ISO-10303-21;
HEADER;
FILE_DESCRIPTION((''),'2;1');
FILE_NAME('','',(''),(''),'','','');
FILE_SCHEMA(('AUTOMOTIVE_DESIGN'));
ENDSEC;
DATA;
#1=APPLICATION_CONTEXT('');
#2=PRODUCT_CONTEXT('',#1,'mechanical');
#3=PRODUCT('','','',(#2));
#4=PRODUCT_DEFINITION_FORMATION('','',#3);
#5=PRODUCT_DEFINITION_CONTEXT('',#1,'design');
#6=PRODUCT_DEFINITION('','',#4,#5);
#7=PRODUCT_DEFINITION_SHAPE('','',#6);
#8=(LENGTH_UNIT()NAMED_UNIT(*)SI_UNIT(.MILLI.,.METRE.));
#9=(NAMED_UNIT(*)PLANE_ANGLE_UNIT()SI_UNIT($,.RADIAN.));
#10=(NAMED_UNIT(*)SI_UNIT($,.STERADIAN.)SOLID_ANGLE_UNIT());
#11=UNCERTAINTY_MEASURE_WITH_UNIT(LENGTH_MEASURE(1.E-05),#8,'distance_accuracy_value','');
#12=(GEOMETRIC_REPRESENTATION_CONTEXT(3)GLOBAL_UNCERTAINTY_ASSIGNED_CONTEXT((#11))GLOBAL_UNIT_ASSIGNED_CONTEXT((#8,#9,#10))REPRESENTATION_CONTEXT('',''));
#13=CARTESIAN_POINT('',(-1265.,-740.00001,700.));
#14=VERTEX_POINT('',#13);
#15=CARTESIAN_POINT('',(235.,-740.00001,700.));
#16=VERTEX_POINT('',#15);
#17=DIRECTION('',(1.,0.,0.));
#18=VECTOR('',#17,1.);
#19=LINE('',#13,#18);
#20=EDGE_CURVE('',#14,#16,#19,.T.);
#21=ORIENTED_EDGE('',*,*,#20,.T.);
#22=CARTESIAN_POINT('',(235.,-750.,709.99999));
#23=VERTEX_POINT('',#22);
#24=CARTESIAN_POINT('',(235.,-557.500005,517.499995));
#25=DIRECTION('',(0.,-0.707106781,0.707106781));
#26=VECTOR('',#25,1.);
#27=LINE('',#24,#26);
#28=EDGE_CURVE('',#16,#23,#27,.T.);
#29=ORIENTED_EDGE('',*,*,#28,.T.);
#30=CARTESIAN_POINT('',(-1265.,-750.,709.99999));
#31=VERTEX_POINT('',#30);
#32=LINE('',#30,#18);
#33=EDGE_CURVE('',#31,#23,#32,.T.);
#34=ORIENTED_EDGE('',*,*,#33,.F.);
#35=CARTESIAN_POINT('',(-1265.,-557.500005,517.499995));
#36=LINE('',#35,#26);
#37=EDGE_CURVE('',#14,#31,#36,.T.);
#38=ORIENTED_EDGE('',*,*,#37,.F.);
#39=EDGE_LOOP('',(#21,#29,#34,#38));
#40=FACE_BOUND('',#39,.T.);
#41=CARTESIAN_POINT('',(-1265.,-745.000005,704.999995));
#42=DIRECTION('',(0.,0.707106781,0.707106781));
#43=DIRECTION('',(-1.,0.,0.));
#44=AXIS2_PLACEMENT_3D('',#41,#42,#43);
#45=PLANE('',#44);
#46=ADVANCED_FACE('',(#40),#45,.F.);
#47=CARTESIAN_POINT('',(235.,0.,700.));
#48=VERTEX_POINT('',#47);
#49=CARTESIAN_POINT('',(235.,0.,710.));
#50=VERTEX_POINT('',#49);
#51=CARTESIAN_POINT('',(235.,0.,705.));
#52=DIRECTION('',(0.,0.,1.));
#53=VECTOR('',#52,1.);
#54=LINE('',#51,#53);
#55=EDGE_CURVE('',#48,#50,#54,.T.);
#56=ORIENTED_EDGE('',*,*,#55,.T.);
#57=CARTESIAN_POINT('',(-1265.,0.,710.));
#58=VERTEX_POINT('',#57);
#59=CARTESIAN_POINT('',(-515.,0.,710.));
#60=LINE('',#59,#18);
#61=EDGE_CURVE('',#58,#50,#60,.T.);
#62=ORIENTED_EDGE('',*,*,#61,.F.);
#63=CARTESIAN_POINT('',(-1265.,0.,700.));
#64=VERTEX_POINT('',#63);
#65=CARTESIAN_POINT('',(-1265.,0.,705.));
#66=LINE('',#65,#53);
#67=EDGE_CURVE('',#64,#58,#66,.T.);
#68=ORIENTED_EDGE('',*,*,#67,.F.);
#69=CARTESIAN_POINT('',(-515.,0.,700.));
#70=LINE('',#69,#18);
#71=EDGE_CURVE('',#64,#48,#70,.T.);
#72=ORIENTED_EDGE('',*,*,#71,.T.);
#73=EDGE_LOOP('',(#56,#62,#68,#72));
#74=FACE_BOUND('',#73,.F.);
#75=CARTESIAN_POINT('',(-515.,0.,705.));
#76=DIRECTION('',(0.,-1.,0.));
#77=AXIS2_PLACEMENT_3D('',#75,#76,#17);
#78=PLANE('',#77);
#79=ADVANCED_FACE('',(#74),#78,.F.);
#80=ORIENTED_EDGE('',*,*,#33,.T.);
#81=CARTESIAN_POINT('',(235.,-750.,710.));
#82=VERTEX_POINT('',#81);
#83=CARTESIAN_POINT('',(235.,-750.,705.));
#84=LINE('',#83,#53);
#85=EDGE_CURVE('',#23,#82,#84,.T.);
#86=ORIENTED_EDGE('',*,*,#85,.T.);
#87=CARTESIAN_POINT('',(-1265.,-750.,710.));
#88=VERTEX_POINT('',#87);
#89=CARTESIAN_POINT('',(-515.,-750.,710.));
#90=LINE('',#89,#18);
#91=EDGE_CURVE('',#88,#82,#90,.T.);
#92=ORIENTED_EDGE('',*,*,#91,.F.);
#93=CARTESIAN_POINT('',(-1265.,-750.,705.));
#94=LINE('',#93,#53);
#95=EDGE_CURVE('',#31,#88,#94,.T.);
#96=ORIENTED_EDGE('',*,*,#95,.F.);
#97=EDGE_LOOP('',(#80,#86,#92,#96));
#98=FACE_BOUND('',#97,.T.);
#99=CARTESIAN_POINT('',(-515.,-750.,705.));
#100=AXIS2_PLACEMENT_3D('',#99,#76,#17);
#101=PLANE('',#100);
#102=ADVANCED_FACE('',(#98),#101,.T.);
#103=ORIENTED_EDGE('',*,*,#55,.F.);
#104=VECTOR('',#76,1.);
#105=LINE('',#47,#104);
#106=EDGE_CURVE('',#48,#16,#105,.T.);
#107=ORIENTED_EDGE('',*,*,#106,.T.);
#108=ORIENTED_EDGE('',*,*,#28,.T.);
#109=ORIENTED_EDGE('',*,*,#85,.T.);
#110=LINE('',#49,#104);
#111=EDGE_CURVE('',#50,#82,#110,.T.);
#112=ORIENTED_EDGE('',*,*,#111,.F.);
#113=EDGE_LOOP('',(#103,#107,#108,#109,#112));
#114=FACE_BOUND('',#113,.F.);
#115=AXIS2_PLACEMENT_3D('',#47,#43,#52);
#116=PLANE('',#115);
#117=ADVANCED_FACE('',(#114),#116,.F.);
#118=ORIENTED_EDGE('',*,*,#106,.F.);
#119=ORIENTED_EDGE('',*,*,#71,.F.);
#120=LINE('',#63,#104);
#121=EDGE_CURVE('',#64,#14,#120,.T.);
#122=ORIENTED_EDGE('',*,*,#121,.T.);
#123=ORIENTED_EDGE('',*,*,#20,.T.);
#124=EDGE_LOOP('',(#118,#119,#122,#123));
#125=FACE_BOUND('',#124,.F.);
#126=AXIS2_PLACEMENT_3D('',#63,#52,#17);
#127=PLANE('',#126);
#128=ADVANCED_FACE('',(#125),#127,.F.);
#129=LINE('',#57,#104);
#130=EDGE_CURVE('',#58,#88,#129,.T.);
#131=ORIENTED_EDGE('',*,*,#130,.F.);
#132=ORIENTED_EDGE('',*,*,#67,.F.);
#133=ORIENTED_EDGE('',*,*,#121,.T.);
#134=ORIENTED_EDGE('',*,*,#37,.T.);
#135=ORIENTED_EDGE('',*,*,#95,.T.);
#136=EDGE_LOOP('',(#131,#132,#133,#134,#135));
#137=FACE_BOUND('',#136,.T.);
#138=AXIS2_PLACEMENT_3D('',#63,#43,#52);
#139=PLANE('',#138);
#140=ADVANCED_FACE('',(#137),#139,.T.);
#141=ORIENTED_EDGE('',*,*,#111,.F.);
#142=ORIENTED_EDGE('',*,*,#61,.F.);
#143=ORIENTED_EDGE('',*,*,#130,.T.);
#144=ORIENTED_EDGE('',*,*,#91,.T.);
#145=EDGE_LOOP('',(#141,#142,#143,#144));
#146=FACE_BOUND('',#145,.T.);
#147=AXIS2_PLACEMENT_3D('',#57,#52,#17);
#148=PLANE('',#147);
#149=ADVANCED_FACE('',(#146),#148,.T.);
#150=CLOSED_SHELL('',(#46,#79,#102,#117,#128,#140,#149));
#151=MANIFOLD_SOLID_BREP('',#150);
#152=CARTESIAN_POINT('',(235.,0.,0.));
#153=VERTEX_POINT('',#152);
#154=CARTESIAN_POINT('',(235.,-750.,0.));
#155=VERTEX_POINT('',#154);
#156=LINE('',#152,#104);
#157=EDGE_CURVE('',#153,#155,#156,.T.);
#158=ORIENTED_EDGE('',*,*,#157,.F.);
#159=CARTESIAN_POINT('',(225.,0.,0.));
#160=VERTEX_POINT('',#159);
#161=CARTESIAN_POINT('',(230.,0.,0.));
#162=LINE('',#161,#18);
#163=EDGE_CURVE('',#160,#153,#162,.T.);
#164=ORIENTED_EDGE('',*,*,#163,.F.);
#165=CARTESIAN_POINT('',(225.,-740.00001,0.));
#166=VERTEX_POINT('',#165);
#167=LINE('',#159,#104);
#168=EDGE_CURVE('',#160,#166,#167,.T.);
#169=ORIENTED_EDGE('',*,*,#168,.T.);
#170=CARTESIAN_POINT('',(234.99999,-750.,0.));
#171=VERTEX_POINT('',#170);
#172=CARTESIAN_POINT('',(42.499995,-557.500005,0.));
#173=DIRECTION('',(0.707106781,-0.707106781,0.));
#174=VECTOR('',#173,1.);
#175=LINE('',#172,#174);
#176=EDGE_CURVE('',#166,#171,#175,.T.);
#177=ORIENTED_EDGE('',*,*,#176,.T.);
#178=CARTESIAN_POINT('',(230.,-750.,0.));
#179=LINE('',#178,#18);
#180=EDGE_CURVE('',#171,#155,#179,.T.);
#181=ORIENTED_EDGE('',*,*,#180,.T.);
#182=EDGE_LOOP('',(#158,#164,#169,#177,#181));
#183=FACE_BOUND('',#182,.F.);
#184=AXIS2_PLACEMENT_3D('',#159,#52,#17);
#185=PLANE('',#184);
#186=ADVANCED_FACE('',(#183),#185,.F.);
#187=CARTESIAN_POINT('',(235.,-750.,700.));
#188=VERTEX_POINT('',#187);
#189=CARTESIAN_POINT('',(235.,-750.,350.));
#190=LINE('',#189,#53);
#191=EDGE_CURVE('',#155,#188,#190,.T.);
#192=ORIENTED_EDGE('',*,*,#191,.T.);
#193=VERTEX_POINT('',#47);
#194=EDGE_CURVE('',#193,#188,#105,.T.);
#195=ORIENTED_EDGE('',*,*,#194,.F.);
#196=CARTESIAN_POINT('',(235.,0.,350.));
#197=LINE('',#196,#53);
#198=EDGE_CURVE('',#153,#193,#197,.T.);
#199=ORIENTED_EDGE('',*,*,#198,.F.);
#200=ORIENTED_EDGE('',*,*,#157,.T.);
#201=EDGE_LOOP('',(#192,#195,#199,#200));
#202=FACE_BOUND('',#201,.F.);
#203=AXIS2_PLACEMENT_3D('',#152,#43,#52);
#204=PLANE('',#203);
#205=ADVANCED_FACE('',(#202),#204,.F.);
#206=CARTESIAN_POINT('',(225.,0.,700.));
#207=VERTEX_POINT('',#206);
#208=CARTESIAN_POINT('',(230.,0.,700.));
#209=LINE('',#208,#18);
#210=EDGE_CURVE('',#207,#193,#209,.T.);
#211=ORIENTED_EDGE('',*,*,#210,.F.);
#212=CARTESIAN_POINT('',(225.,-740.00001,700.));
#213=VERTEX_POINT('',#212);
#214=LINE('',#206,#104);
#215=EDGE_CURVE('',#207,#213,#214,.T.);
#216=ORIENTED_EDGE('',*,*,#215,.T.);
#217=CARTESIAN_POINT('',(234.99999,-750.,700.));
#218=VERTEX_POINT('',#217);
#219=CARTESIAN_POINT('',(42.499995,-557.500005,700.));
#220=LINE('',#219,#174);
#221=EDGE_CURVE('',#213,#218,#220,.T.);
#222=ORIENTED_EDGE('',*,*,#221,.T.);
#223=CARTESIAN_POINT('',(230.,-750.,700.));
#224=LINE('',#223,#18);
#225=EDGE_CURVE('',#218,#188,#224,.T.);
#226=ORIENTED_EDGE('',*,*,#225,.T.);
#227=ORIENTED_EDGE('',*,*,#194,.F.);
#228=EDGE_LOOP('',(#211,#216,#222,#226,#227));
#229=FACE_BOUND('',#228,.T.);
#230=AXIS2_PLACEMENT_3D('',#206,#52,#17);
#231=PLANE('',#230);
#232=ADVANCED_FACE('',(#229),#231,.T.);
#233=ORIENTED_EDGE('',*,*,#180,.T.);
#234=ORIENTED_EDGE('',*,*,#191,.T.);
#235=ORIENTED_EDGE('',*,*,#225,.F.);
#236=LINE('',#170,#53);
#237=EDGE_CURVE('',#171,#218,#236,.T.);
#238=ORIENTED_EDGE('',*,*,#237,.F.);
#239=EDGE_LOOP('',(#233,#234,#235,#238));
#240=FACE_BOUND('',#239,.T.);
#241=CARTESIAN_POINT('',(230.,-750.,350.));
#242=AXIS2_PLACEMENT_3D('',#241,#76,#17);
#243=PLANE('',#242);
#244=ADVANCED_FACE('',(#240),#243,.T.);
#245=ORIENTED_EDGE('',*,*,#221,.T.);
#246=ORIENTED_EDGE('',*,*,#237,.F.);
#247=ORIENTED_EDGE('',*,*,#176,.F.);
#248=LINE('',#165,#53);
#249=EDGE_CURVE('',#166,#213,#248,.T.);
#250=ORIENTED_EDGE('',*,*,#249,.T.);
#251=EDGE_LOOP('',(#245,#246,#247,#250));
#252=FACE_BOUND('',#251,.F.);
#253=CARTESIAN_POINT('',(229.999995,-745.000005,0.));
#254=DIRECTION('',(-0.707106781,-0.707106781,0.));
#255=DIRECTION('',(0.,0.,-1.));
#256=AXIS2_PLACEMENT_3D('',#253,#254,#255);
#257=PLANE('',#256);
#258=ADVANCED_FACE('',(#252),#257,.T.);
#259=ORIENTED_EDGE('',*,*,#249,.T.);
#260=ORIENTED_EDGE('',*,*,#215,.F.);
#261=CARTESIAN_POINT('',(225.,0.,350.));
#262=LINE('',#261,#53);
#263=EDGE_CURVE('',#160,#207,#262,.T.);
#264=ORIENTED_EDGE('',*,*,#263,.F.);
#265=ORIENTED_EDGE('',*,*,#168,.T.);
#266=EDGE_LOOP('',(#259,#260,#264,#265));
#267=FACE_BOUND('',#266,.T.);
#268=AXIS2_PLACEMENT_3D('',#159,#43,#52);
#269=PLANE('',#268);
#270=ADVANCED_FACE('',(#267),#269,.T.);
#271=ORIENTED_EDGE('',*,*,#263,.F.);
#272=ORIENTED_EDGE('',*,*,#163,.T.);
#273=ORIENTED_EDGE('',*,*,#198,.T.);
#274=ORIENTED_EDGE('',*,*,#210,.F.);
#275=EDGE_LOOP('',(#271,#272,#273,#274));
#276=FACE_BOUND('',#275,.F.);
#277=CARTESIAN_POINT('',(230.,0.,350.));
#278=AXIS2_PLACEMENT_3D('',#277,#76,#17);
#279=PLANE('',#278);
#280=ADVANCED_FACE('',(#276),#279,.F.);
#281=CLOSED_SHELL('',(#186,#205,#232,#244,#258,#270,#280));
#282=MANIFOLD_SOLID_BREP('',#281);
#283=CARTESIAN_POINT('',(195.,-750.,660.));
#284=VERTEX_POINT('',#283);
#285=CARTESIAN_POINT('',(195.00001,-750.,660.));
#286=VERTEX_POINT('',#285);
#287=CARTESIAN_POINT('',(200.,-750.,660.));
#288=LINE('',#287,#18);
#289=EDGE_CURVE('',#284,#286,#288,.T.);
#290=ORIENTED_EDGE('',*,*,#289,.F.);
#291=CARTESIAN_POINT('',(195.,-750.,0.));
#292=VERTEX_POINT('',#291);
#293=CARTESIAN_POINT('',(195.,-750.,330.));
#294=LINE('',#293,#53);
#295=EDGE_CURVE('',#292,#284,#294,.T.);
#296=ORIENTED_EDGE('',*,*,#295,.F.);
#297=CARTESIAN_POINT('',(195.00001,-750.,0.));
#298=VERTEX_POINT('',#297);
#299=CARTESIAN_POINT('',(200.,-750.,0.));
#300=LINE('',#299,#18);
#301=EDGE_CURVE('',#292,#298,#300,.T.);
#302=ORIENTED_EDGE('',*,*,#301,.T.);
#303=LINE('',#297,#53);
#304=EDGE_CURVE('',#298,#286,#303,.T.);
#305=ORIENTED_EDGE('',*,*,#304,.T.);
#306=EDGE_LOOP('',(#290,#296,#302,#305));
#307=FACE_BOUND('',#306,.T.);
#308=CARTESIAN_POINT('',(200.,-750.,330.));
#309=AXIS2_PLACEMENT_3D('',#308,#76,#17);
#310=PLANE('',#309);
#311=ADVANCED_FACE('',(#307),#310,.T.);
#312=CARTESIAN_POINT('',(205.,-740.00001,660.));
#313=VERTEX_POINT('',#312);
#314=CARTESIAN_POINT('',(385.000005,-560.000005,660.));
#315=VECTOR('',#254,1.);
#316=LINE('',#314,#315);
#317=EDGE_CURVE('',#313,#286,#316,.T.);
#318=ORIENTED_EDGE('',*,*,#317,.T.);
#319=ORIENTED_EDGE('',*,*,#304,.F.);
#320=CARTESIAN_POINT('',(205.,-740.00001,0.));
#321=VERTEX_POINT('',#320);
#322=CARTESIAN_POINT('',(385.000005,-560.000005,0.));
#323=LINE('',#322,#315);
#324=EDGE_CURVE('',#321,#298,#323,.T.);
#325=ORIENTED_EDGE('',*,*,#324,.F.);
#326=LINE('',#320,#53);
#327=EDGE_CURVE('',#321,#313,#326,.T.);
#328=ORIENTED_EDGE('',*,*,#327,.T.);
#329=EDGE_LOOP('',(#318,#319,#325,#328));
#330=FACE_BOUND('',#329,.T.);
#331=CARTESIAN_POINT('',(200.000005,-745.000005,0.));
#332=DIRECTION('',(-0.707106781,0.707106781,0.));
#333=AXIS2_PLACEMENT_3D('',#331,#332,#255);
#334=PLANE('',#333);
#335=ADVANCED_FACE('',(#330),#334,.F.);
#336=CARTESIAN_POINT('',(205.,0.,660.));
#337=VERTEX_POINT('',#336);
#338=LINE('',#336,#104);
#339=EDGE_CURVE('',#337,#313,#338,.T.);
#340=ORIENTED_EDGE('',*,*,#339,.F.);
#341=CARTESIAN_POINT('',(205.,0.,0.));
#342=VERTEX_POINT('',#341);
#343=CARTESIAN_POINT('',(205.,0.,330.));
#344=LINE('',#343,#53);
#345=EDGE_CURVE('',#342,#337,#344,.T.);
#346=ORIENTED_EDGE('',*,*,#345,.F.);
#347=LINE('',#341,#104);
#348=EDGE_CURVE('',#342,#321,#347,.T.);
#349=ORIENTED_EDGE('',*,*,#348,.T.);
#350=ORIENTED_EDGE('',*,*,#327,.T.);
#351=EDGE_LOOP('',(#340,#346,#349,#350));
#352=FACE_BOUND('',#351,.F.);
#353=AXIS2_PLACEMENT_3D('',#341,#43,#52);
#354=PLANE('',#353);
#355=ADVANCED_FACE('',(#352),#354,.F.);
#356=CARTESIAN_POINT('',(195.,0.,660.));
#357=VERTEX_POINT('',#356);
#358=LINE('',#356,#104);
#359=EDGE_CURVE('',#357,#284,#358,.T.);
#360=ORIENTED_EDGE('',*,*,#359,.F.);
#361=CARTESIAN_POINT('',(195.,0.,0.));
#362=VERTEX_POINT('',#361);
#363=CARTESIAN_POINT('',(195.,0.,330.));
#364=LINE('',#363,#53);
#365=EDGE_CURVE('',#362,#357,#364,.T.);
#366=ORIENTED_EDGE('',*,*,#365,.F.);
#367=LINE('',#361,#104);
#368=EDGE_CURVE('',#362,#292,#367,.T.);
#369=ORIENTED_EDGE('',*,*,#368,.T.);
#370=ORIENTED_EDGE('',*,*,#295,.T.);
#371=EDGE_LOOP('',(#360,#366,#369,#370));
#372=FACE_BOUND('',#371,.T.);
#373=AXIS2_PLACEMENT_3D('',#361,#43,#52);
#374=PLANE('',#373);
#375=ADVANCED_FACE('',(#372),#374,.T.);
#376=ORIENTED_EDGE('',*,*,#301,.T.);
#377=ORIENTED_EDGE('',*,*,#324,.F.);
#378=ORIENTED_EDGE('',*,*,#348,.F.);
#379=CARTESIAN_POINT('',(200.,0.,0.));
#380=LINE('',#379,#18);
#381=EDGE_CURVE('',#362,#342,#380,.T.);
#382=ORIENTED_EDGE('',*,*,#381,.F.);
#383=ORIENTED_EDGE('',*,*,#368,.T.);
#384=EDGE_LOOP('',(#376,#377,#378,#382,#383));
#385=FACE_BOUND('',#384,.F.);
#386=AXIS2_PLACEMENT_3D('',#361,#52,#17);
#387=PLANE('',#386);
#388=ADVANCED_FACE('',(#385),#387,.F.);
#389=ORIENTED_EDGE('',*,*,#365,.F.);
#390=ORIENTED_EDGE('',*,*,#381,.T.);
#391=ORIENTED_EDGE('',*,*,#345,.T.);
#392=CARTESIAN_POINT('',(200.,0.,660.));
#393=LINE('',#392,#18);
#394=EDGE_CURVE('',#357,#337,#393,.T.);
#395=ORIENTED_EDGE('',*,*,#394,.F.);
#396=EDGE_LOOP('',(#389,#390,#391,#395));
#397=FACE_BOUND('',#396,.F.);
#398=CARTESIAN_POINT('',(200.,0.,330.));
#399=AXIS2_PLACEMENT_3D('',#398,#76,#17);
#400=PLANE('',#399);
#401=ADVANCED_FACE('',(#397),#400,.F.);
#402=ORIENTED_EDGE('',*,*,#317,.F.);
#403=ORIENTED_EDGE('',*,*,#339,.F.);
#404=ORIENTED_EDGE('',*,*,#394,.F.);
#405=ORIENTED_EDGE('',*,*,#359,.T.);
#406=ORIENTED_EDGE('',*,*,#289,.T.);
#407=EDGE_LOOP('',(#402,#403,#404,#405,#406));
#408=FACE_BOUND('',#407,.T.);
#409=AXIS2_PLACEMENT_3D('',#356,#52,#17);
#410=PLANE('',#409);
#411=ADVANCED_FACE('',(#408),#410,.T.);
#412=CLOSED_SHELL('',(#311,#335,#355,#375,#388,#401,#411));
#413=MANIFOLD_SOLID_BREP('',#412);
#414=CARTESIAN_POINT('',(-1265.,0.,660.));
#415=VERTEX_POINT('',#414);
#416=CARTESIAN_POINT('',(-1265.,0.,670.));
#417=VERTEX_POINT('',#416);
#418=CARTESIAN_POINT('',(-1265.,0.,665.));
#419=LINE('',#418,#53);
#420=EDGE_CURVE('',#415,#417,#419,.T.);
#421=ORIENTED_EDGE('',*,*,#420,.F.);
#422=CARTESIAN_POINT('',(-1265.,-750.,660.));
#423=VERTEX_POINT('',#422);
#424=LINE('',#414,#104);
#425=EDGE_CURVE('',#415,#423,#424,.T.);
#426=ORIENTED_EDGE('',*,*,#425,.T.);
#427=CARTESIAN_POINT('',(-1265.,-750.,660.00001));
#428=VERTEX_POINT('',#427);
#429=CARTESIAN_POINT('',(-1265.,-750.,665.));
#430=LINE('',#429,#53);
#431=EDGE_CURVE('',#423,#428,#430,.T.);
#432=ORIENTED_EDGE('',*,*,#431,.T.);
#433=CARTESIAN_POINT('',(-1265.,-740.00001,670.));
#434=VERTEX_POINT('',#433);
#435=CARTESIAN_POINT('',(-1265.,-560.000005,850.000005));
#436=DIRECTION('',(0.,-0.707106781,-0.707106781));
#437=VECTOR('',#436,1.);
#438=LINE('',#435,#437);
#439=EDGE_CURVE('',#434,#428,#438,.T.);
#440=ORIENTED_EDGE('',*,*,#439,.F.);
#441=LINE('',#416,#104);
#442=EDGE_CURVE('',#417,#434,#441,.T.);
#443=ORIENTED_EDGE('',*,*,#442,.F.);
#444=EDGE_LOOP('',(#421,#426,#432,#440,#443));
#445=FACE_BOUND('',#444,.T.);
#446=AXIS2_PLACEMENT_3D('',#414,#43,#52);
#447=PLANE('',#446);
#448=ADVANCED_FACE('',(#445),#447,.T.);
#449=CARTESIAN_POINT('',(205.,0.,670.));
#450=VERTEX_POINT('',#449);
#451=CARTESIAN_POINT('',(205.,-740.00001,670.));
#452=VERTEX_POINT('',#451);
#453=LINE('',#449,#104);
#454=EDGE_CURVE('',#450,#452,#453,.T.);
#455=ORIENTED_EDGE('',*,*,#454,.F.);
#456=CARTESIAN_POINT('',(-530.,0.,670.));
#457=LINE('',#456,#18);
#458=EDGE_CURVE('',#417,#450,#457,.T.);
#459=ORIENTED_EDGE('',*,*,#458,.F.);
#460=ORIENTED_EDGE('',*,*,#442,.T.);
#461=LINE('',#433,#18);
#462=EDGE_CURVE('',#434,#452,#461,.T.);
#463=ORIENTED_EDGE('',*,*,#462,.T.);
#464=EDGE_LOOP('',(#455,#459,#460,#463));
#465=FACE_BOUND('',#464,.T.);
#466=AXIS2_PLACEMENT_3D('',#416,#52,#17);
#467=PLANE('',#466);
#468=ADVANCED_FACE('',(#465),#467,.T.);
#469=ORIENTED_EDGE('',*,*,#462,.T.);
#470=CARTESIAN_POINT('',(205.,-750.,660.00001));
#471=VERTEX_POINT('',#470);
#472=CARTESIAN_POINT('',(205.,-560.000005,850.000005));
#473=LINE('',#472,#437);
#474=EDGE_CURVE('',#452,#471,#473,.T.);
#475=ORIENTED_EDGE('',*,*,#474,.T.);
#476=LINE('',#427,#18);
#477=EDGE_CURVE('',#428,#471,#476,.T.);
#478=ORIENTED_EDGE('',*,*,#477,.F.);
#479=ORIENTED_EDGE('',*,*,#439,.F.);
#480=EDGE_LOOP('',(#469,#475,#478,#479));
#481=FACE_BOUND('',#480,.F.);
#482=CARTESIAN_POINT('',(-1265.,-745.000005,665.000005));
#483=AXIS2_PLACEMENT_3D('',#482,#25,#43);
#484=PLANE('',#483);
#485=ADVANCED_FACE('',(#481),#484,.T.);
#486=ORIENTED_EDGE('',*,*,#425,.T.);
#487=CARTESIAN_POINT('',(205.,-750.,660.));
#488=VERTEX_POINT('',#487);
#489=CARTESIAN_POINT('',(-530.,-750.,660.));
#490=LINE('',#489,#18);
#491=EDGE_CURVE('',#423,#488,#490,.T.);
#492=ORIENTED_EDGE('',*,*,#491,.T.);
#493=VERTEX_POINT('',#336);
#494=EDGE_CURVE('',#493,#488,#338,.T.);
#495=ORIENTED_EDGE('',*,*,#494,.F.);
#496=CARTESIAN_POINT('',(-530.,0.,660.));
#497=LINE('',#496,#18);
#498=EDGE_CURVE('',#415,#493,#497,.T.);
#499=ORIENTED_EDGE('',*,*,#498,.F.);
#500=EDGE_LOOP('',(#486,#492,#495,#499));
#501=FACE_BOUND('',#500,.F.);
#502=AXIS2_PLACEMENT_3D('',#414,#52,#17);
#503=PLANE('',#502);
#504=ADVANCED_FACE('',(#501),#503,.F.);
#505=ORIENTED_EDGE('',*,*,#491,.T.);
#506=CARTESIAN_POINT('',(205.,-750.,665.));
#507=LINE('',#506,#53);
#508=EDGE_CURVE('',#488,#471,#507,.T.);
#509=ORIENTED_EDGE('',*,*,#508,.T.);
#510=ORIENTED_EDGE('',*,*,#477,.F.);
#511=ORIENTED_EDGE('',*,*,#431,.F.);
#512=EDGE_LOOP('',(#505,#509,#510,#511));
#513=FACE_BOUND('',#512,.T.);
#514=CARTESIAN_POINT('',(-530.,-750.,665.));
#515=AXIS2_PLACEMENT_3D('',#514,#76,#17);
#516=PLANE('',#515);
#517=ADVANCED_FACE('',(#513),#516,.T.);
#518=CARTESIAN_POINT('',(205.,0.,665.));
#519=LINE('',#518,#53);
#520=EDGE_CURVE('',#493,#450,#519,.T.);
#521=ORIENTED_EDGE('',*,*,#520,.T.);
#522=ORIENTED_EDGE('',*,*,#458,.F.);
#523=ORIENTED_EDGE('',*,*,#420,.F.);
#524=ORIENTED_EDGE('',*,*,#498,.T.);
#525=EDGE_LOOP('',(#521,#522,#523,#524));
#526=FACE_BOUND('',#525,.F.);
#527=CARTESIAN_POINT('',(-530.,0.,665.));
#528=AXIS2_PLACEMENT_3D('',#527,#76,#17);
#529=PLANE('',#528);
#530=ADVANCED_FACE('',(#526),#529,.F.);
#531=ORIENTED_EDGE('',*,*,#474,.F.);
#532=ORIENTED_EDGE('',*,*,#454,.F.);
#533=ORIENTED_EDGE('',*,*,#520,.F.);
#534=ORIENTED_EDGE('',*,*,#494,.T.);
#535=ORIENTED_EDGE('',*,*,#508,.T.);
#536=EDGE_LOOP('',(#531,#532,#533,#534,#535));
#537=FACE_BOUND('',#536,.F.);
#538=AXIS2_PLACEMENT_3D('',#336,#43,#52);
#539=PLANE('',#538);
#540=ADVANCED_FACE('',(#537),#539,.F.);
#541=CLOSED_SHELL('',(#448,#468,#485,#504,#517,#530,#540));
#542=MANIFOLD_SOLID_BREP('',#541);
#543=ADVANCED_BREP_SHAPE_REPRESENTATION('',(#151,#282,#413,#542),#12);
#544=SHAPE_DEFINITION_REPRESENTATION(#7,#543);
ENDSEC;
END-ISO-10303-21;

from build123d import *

# Parameters (mm, degrees)
F3_W      = 1500
F3_H      = 10
F7_DEPTH  = 750
F4_W      = 1470
F4_H      = 10
F8_DEPTH  = 750
F5_W      = 10
F5_H      = 700
F9_DEPTH  = 750
F6_W      = 10
F6_H      = 660
F10_DEPTH = 750
F11_SIZE  = 9.99999
F12_SIZE  = 9.99999
F13_SIZE  = 9.99999
F14_SIZE  = 9.99999


# Not quite as in the source:
# - a fillet or chamfer is up to 0.001 mm smaller than in the source, because OpenCascade refuses the exact size


with BuildPart() as f7:
    # F3 (on face) → F7 (new body)
    with BuildSketch(Plane.XZ):
        with Locations((-515, 705)):
            Rectangle(F3_W, F3_H)
    extrude(amount=F7_DEPTH)

    # F11 (size 10 in the source; OpenCascade refuses exactly that, so slightly less here)
    f11_edges = [f7.edges().sort_by_distance(p)[0] for p in [
        (-515, -750, 700),
    ]]
    chamfer(f11_edges, length=F11_SIZE)


with BuildPart() as f8:
    # F4 (on face) → F8 (new body)
    with BuildSketch(Plane.XZ):
        with Locations((-530, 665)):
            Rectangle(F4_W, F4_H)
    extrude(amount=F8_DEPTH)

    # F12 (size 10 in the source; OpenCascade refuses exactly that, so slightly less here)
    f12_edges = [f8.edges().sort_by_distance(p)[0] for p in [
        (-530, -750, 670),
    ]]
    chamfer(f12_edges, length=F12_SIZE)


with BuildPart() as f9:
    # F5 (on face) → F9 (new body)
    with BuildSketch(Plane.XZ):
        with Locations((230, 350)):
            Rectangle(F5_W, F5_H)
    extrude(amount=F9_DEPTH)

    # F14 (size 10 in the source; OpenCascade refuses exactly that, so slightly less here)
    f14_edges = [f9.edges().sort_by_distance(p)[0] for p in [
        (225, -750, 350),
    ]]
    chamfer(f14_edges, length=F14_SIZE)


with BuildPart() as f10:
    # F6 (on face) → F10 (new body)
    with BuildSketch(Plane.XZ):
        with Locations((200, 330)):
            Rectangle(F6_W, F6_H)
    extrude(amount=F10_DEPTH)

    # F13 (size 10 in the source; OpenCascade refuses exactly that, so slightly less here)
    f13_edges = [f10.edges().sort_by_distance(p)[0] for p in [
        (205, -750, 330),
    ]]
    chamfer(f13_edges, length=F13_SIZE)


solid = Compound([f7.part, f8.part, f9.part, f10.part])
